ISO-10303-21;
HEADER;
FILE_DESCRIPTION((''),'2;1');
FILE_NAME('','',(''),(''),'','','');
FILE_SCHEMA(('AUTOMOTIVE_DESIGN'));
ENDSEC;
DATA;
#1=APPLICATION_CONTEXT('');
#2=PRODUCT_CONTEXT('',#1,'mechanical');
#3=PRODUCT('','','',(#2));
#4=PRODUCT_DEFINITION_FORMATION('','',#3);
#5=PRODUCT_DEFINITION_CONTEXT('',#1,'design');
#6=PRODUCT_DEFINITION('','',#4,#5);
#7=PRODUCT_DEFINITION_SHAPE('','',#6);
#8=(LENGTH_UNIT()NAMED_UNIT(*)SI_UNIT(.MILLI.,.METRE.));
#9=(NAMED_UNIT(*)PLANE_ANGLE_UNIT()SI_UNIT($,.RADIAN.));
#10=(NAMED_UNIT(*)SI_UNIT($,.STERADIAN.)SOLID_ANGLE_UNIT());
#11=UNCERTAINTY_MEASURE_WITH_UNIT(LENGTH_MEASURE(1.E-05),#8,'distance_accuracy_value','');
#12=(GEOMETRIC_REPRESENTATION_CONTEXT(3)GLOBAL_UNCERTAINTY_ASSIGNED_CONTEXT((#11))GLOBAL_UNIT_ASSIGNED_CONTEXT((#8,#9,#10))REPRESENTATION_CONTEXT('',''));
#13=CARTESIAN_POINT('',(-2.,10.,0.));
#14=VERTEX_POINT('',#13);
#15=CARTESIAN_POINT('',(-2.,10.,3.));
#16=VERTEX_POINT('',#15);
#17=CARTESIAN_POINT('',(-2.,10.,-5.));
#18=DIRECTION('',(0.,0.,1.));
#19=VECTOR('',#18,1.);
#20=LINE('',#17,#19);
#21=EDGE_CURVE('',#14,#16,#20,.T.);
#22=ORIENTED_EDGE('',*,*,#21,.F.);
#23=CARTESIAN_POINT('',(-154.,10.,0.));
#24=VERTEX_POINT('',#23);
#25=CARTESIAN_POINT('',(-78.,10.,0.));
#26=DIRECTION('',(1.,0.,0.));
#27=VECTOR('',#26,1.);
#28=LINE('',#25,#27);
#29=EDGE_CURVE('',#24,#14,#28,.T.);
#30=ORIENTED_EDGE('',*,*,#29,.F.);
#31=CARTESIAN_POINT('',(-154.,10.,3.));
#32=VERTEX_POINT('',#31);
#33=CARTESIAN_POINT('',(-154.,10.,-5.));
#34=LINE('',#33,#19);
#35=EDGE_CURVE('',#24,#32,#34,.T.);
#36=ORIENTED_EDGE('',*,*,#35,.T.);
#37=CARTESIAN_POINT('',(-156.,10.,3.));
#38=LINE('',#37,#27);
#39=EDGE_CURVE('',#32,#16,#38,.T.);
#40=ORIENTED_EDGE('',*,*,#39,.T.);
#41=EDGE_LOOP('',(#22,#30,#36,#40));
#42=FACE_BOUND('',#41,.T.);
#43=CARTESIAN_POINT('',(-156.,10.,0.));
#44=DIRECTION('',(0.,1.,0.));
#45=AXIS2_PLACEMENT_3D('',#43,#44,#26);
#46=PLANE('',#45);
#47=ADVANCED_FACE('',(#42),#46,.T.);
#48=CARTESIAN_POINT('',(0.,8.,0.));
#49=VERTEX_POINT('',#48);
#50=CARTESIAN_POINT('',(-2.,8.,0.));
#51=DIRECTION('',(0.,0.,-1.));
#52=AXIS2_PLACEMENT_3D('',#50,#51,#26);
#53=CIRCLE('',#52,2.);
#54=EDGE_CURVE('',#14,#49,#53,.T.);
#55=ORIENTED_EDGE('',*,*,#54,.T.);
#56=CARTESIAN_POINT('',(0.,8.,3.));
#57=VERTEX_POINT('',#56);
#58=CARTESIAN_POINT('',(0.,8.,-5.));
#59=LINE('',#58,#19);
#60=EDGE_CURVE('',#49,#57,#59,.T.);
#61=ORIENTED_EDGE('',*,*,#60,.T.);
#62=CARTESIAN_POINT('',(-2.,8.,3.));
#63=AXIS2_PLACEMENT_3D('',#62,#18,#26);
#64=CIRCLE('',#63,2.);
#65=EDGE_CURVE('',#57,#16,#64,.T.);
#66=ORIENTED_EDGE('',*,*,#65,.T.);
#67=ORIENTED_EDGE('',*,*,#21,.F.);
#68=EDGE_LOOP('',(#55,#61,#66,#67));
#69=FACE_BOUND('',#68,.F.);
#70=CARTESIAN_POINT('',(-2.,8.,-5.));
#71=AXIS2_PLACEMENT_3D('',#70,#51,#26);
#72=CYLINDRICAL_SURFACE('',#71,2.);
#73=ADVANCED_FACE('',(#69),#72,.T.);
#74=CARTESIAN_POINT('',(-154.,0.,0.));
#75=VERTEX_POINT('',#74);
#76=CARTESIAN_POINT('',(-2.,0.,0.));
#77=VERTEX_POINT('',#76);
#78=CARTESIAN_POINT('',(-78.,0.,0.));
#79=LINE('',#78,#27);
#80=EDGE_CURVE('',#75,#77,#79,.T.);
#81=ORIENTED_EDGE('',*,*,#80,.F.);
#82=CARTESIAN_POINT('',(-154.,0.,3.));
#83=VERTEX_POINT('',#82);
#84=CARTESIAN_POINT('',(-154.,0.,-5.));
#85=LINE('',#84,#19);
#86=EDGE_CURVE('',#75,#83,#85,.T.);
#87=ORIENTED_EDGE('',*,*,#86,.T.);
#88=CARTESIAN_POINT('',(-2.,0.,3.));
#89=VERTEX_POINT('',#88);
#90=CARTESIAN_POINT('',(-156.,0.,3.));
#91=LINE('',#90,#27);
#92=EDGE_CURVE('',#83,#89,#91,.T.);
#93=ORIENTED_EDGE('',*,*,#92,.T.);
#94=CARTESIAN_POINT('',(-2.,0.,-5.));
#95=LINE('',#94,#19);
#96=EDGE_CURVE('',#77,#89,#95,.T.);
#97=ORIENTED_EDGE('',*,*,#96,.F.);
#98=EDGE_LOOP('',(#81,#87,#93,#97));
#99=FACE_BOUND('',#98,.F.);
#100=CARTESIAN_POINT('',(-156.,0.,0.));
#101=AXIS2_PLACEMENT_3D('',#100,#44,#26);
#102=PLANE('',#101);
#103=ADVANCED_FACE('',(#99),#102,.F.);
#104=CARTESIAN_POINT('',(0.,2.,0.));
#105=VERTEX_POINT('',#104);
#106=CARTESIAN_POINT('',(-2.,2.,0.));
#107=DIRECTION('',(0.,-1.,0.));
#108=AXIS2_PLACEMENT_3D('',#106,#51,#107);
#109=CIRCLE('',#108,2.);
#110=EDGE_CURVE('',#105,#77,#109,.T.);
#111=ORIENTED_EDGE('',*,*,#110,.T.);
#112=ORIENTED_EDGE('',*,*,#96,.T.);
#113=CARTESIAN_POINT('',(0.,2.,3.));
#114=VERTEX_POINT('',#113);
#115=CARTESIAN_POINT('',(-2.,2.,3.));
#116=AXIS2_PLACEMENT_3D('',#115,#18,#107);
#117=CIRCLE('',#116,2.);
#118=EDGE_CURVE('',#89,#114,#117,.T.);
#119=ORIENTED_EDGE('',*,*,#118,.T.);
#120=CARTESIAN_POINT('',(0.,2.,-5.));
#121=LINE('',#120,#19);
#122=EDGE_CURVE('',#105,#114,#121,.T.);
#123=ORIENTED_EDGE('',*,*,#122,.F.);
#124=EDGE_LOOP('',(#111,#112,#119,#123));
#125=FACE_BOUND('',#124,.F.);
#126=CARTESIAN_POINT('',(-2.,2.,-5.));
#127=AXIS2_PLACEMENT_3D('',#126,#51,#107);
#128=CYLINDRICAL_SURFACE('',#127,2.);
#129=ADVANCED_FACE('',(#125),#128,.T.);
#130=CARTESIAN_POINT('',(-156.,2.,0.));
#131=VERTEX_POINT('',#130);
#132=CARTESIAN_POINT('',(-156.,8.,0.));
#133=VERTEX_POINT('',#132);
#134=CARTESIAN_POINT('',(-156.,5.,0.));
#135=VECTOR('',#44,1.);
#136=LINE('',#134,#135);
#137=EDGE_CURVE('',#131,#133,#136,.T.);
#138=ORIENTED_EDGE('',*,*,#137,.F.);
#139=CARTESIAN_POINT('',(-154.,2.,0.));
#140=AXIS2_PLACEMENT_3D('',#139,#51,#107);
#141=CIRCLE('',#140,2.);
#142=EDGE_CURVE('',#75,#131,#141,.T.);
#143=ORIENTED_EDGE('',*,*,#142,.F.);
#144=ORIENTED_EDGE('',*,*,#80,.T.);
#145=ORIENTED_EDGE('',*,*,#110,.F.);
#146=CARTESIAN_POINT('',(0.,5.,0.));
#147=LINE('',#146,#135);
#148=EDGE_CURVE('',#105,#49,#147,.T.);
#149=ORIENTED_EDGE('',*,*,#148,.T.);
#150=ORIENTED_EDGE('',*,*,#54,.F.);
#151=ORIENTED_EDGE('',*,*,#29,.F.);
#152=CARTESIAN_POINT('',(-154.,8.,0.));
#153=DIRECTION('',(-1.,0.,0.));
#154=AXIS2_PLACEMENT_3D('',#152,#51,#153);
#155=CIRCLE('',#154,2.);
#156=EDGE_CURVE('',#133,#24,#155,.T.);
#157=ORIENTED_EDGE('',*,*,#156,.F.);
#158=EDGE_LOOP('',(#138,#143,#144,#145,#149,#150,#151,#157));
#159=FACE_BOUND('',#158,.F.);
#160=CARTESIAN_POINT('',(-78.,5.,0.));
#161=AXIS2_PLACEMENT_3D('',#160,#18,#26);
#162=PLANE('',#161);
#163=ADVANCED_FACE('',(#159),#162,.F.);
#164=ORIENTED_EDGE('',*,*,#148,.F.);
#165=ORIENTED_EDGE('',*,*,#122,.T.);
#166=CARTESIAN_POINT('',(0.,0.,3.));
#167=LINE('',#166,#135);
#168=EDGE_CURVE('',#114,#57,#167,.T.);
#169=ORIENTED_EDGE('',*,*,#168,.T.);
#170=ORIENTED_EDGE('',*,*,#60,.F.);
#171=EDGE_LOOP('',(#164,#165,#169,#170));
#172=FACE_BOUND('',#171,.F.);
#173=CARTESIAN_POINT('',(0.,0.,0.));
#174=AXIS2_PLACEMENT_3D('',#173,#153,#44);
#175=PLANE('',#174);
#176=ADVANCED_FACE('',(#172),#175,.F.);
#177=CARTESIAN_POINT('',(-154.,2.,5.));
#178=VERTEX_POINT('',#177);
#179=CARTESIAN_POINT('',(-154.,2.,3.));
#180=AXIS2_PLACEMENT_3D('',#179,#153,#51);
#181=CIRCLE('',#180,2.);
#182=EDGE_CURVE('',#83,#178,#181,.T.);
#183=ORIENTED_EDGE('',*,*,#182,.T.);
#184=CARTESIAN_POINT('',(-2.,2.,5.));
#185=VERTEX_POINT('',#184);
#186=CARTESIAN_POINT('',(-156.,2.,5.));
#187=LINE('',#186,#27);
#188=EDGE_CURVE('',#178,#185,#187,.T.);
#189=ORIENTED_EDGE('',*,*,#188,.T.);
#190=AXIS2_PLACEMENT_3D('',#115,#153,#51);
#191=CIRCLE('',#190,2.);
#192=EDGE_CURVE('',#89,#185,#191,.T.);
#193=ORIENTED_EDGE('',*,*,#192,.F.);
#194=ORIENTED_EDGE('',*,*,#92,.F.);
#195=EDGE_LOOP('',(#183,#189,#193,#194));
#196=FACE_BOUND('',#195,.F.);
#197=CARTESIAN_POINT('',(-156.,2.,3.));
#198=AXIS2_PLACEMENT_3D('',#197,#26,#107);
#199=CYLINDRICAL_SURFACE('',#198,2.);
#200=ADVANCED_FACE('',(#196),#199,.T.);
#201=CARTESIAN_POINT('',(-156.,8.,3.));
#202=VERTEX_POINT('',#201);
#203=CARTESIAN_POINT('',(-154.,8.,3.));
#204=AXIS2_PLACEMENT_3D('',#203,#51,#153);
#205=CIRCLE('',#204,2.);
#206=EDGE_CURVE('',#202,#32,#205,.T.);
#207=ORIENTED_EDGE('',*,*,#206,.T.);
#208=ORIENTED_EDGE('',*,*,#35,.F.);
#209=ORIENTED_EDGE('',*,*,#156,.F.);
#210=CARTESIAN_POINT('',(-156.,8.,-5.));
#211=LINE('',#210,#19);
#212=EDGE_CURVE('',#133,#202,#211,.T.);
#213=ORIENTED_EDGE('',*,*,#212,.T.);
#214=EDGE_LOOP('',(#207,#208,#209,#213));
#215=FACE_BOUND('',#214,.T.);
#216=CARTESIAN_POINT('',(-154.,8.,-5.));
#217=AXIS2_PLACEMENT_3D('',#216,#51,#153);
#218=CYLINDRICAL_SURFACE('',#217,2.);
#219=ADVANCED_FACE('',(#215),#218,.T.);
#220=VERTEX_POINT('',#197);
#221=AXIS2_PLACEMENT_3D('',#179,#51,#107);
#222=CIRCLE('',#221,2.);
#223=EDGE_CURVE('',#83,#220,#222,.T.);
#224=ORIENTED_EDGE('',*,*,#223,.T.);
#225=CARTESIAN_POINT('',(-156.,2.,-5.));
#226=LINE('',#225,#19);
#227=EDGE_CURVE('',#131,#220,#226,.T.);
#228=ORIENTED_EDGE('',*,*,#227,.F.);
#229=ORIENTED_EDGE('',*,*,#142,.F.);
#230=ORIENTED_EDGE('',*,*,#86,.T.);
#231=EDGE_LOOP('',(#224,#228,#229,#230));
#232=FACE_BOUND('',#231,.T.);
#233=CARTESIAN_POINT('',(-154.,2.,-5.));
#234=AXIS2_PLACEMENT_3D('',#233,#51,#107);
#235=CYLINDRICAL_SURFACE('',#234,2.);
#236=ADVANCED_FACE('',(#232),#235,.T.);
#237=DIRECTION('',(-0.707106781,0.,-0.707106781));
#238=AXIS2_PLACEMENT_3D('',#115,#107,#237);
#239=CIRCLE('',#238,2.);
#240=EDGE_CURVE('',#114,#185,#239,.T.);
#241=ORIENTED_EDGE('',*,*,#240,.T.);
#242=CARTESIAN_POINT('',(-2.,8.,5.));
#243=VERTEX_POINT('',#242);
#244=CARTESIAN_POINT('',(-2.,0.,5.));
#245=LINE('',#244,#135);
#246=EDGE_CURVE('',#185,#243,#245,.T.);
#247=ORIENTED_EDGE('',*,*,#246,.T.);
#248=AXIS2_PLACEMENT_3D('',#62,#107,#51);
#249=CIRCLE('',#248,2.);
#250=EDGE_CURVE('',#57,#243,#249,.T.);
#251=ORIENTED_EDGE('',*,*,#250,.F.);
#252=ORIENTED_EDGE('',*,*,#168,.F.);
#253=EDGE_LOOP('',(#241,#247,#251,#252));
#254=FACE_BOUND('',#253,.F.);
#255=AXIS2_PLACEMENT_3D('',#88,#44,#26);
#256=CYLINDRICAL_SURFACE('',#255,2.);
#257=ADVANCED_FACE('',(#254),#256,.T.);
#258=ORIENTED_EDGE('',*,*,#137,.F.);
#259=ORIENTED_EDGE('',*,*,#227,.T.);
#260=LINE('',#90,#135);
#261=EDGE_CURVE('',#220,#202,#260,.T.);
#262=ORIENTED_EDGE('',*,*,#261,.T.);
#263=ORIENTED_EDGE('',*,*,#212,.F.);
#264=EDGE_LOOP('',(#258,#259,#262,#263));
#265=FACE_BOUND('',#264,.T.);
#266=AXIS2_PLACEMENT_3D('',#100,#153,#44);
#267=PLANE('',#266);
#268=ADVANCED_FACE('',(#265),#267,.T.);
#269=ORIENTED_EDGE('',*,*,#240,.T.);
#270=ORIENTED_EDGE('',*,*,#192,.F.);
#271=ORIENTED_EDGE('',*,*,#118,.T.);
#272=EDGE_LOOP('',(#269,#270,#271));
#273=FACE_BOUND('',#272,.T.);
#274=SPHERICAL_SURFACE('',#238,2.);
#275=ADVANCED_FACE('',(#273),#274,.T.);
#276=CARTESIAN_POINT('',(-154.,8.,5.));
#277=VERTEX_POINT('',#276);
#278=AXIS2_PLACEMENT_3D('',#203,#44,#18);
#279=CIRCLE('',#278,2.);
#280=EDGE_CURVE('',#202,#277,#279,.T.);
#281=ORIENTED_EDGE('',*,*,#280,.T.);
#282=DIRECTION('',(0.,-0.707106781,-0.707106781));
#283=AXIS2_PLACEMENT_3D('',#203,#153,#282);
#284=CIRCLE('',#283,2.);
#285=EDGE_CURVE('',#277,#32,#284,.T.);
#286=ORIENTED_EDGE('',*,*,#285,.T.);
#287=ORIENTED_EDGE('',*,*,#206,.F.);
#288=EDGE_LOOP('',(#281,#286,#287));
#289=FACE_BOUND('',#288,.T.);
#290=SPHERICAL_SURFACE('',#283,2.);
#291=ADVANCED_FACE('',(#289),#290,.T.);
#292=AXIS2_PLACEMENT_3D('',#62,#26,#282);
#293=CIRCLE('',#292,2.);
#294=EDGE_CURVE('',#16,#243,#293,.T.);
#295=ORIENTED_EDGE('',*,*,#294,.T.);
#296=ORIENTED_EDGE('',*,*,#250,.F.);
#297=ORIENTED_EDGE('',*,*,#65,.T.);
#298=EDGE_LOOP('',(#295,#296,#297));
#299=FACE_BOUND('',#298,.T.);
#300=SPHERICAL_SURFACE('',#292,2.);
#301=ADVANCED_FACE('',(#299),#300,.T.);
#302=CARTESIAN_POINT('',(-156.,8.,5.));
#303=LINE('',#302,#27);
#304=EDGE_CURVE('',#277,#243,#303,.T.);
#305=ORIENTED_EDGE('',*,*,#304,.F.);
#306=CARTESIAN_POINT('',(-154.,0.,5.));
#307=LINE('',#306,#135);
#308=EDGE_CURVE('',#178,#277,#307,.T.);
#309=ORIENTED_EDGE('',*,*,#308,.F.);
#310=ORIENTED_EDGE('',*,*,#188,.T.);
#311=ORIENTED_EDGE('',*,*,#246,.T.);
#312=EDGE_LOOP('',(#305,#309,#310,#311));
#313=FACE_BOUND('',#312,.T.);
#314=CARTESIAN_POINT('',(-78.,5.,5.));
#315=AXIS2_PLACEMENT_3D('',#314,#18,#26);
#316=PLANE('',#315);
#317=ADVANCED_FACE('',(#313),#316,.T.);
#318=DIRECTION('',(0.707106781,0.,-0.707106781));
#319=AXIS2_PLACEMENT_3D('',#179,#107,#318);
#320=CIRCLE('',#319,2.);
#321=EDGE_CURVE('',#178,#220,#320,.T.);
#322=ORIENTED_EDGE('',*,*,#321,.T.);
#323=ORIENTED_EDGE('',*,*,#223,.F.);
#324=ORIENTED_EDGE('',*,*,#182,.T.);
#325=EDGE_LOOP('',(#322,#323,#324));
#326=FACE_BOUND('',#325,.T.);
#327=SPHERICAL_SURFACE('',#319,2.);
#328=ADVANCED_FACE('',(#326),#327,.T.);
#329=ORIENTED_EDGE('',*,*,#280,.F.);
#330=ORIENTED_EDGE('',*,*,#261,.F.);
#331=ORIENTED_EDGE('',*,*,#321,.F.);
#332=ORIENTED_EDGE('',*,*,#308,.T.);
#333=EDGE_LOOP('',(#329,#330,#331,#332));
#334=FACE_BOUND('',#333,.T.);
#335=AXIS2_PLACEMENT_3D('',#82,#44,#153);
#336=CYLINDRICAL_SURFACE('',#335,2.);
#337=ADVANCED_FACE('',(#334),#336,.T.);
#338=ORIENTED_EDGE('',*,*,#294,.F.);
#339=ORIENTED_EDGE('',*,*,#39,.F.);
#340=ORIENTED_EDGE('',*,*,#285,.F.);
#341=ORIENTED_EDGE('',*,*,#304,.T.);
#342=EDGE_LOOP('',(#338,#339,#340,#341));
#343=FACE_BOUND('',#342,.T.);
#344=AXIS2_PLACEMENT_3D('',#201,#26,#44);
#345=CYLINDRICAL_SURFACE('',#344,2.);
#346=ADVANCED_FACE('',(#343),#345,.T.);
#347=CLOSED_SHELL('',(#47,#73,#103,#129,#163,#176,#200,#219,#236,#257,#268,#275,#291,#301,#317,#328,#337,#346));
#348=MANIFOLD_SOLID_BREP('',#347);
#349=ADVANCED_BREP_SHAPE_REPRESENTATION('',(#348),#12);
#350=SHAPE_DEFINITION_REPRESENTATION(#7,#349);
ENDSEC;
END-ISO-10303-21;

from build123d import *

# Parameters (mm, degrees)
F0_W         = 156
F0_H         = 10
F1_DEPTH     = 5
F2_R         = 2
F3_T1_DEPTH  = 8
F3_S5_W      = 2
F3_S5_H      = 2
F3_T6_DEPTH  = 2
F3_S11_W     = 2
F3_S11_H     = 2
F3_T12_DEPTH = 2
F3_S17_W     = 2
F3_S17_H     = 2
F3_T18_DEPTH = 2
F3_S23_W     = 2
F3_S23_H     = 2
F3_T24_DEPTH = 2


# Not quite as in the source:
# - a fillet or chamfer that OpenCascade refuses, or shapes differently, is made with other operations: its cross-section is extruded or revolved along the edge and cut away or added


with BuildPart() as f1:
    # F0 (on Top) → F1 (new body)
    with BuildSketch(Plane.XY):
        with Locations((-78, 5)):
            Rectangle(F0_W, F0_H)
    extrude(amount=F1_DEPTH)

    # F2
    f2_edges = [f1.edges().sort_by_distance(p)[0] for p in [
        (-78, 10, 5),
        (-156, 5, 5),
        (-78, 0, 5),
        (0, 5, 5),
    ]]
    fillet(f2_edges, radius=F2_R)

    # F3: fillet of radius 2 on 4 edges, made by hand

    # F3_s2 → F3_t1 (cut)
    with BuildSketch(Plane.XY.offset(-5)):
        with BuildLine():
            ThreePointArc((0, 8), (-0.5857864376, 9.4142135624), (-2, 10))
            Line((-2, 10), (0, 10))
            Line((0, 10), (0, 8))
        make_face()
        with BuildLine():
            ThreePointArc((-2, 0), (-0.5857864376, 0.5857864376), (0, 2))
            Line((0, 2), (0, 0))
            Line((0, 0), (-2, 0))
        make_face()
        with BuildLine():
            ThreePointArc((-154, 0), (-155.4142135624, 0.5857864376), (-156, 2))
            Line((-156, 2), (-156, 0))
            Line((-156, 0), (-154, 0))
        make_face()
        with BuildLine():
            ThreePointArc((-156, 8), (-155.4142135624, 9.4142135624), (-154, 10))
            Line((-154, 10), (-156, 10))
            Line((-156, 10), (-156, 8))
        make_face()
    extrude(amount=F3_T1_DEPTH, mode=Mode.SUBTRACT)


with BuildPart() as f3_tool4:
    # F3_s5 → F3_t6 (new body)
    with BuildSketch(Plane.YZ.offset(-154)):
        with Locations((9, 4)):
            Rectangle(F3_S5_W, F3_S5_H)
    extrude(amount=-F3_T6_DEPTH)

    # F3_s7 → F3_t8 (revolve, cut)
    with BuildSketch(Plane(origin=(-154, 8, 3), x_dir=(0, -0.7071067812, -0.7071067812), z_dir=(0, 0.7071067812, -0.7071067812))):
        with BuildLine():
            ThreePointArc((0, -2), (2, 0), (0, 2))
            Line((0, 2), (0, -2))
        make_face()
    revolve(axis=Axis((-154, 8, 3), (-1, 0, 0)), mode=Mode.SUBTRACT)


with BuildPart() as f1_1:
    add(f1.part)

    # F3_t3: cut F3_tool4
    add(f3_tool4.part, mode=Mode.SUBTRACT)


with BuildPart() as f3_tool10:
    # F3_s11 → F3_t12 (new body)
    with BuildSketch(Plane.XZ.offset(-2)):
        with Locations((-155, 4)):
            Rectangle(F3_S11_W, F3_S11_H)
    extrude(amount=F3_T12_DEPTH)

    # F3_s13 → F3_t14 (revolve, cut)
    with BuildSketch(Plane(origin=(-154, 2, 3), x_dir=(0.7071067812, 0, -0.7071067812), z_dir=(-0.7071067812, 0, -0.7071067812))):
        with BuildLine():
            ThreePointArc((0, -2), (2, 0), (0, 2))
            Line((0, 2), (0, -2))
        make_face()
    revolve(axis=Axis((-154, 2, 3), (0, -1, 0)), mode=Mode.SUBTRACT)


with BuildPart() as f1_2:
    add(f1_1.part)

    # F3_t9: cut F3_tool10
    add(f3_tool10.part, mode=Mode.SUBTRACT)


with BuildPart() as f3_tool16:
    # F3_s17 → F3_t18 (new body)
    with BuildSketch(Plane.XZ.offset(-2)):
        with Locations((-1, 4)):
            Rectangle(F3_S17_W, F3_S17_H)
    extrude(amount=F3_T18_DEPTH)

    # F3_s19 → F3_t20 (revolve, cut)
    with BuildSketch(Plane(origin=(-2, 2, 3), x_dir=(-0.7071067812, 0, -0.7071067812), z_dir=(-0.7071067812, 0, 0.7071067812))):
        with BuildLine():
            ThreePointArc((0, -2), (2, 0), (0, 2))
            Line((0, 2), (0, -2))
        make_face()
    revolve(axis=Axis((-2, 2, 3), (0, -1, 0)), mode=Mode.SUBTRACT)


with BuildPart() as f1_3:
    add(f1_2.part)

    # F3_t15: cut F3_tool16
    add(f3_tool16.part, mode=Mode.SUBTRACT)


with BuildPart() as f3_tool22:
    # F3_s23 → F3_t24 (new body)
    with BuildSketch(Plane.YZ.offset(-2)):
        with Locations((9, 4)):
            Rectangle(F3_S23_W, F3_S23_H)
    extrude(amount=F3_T24_DEPTH)

    # F3_s25 → F3_t26 (revolve, cut)
    with BuildSketch(Plane(origin=(-2, 8, 3), x_dir=(0, -0.7071067812, -0.7071067812), z_dir=(0, -0.7071067812, 0.7071067812))):
        with BuildLine():
            ThreePointArc((0, -2), (2, 0), (0, 2))
            Line((0, 2), (0, -2))
        make_face()
    revolve(axis=Axis((-2, 8, 3), (1, 0, 0)), mode=Mode.SUBTRACT)


with BuildPart() as f1_4:
    add(f1_3.part)

    # F3_t21: cut F3_tool22
    add(f3_tool22.part, mode=Mode.SUBTRACT)


solid = f1_4.part
